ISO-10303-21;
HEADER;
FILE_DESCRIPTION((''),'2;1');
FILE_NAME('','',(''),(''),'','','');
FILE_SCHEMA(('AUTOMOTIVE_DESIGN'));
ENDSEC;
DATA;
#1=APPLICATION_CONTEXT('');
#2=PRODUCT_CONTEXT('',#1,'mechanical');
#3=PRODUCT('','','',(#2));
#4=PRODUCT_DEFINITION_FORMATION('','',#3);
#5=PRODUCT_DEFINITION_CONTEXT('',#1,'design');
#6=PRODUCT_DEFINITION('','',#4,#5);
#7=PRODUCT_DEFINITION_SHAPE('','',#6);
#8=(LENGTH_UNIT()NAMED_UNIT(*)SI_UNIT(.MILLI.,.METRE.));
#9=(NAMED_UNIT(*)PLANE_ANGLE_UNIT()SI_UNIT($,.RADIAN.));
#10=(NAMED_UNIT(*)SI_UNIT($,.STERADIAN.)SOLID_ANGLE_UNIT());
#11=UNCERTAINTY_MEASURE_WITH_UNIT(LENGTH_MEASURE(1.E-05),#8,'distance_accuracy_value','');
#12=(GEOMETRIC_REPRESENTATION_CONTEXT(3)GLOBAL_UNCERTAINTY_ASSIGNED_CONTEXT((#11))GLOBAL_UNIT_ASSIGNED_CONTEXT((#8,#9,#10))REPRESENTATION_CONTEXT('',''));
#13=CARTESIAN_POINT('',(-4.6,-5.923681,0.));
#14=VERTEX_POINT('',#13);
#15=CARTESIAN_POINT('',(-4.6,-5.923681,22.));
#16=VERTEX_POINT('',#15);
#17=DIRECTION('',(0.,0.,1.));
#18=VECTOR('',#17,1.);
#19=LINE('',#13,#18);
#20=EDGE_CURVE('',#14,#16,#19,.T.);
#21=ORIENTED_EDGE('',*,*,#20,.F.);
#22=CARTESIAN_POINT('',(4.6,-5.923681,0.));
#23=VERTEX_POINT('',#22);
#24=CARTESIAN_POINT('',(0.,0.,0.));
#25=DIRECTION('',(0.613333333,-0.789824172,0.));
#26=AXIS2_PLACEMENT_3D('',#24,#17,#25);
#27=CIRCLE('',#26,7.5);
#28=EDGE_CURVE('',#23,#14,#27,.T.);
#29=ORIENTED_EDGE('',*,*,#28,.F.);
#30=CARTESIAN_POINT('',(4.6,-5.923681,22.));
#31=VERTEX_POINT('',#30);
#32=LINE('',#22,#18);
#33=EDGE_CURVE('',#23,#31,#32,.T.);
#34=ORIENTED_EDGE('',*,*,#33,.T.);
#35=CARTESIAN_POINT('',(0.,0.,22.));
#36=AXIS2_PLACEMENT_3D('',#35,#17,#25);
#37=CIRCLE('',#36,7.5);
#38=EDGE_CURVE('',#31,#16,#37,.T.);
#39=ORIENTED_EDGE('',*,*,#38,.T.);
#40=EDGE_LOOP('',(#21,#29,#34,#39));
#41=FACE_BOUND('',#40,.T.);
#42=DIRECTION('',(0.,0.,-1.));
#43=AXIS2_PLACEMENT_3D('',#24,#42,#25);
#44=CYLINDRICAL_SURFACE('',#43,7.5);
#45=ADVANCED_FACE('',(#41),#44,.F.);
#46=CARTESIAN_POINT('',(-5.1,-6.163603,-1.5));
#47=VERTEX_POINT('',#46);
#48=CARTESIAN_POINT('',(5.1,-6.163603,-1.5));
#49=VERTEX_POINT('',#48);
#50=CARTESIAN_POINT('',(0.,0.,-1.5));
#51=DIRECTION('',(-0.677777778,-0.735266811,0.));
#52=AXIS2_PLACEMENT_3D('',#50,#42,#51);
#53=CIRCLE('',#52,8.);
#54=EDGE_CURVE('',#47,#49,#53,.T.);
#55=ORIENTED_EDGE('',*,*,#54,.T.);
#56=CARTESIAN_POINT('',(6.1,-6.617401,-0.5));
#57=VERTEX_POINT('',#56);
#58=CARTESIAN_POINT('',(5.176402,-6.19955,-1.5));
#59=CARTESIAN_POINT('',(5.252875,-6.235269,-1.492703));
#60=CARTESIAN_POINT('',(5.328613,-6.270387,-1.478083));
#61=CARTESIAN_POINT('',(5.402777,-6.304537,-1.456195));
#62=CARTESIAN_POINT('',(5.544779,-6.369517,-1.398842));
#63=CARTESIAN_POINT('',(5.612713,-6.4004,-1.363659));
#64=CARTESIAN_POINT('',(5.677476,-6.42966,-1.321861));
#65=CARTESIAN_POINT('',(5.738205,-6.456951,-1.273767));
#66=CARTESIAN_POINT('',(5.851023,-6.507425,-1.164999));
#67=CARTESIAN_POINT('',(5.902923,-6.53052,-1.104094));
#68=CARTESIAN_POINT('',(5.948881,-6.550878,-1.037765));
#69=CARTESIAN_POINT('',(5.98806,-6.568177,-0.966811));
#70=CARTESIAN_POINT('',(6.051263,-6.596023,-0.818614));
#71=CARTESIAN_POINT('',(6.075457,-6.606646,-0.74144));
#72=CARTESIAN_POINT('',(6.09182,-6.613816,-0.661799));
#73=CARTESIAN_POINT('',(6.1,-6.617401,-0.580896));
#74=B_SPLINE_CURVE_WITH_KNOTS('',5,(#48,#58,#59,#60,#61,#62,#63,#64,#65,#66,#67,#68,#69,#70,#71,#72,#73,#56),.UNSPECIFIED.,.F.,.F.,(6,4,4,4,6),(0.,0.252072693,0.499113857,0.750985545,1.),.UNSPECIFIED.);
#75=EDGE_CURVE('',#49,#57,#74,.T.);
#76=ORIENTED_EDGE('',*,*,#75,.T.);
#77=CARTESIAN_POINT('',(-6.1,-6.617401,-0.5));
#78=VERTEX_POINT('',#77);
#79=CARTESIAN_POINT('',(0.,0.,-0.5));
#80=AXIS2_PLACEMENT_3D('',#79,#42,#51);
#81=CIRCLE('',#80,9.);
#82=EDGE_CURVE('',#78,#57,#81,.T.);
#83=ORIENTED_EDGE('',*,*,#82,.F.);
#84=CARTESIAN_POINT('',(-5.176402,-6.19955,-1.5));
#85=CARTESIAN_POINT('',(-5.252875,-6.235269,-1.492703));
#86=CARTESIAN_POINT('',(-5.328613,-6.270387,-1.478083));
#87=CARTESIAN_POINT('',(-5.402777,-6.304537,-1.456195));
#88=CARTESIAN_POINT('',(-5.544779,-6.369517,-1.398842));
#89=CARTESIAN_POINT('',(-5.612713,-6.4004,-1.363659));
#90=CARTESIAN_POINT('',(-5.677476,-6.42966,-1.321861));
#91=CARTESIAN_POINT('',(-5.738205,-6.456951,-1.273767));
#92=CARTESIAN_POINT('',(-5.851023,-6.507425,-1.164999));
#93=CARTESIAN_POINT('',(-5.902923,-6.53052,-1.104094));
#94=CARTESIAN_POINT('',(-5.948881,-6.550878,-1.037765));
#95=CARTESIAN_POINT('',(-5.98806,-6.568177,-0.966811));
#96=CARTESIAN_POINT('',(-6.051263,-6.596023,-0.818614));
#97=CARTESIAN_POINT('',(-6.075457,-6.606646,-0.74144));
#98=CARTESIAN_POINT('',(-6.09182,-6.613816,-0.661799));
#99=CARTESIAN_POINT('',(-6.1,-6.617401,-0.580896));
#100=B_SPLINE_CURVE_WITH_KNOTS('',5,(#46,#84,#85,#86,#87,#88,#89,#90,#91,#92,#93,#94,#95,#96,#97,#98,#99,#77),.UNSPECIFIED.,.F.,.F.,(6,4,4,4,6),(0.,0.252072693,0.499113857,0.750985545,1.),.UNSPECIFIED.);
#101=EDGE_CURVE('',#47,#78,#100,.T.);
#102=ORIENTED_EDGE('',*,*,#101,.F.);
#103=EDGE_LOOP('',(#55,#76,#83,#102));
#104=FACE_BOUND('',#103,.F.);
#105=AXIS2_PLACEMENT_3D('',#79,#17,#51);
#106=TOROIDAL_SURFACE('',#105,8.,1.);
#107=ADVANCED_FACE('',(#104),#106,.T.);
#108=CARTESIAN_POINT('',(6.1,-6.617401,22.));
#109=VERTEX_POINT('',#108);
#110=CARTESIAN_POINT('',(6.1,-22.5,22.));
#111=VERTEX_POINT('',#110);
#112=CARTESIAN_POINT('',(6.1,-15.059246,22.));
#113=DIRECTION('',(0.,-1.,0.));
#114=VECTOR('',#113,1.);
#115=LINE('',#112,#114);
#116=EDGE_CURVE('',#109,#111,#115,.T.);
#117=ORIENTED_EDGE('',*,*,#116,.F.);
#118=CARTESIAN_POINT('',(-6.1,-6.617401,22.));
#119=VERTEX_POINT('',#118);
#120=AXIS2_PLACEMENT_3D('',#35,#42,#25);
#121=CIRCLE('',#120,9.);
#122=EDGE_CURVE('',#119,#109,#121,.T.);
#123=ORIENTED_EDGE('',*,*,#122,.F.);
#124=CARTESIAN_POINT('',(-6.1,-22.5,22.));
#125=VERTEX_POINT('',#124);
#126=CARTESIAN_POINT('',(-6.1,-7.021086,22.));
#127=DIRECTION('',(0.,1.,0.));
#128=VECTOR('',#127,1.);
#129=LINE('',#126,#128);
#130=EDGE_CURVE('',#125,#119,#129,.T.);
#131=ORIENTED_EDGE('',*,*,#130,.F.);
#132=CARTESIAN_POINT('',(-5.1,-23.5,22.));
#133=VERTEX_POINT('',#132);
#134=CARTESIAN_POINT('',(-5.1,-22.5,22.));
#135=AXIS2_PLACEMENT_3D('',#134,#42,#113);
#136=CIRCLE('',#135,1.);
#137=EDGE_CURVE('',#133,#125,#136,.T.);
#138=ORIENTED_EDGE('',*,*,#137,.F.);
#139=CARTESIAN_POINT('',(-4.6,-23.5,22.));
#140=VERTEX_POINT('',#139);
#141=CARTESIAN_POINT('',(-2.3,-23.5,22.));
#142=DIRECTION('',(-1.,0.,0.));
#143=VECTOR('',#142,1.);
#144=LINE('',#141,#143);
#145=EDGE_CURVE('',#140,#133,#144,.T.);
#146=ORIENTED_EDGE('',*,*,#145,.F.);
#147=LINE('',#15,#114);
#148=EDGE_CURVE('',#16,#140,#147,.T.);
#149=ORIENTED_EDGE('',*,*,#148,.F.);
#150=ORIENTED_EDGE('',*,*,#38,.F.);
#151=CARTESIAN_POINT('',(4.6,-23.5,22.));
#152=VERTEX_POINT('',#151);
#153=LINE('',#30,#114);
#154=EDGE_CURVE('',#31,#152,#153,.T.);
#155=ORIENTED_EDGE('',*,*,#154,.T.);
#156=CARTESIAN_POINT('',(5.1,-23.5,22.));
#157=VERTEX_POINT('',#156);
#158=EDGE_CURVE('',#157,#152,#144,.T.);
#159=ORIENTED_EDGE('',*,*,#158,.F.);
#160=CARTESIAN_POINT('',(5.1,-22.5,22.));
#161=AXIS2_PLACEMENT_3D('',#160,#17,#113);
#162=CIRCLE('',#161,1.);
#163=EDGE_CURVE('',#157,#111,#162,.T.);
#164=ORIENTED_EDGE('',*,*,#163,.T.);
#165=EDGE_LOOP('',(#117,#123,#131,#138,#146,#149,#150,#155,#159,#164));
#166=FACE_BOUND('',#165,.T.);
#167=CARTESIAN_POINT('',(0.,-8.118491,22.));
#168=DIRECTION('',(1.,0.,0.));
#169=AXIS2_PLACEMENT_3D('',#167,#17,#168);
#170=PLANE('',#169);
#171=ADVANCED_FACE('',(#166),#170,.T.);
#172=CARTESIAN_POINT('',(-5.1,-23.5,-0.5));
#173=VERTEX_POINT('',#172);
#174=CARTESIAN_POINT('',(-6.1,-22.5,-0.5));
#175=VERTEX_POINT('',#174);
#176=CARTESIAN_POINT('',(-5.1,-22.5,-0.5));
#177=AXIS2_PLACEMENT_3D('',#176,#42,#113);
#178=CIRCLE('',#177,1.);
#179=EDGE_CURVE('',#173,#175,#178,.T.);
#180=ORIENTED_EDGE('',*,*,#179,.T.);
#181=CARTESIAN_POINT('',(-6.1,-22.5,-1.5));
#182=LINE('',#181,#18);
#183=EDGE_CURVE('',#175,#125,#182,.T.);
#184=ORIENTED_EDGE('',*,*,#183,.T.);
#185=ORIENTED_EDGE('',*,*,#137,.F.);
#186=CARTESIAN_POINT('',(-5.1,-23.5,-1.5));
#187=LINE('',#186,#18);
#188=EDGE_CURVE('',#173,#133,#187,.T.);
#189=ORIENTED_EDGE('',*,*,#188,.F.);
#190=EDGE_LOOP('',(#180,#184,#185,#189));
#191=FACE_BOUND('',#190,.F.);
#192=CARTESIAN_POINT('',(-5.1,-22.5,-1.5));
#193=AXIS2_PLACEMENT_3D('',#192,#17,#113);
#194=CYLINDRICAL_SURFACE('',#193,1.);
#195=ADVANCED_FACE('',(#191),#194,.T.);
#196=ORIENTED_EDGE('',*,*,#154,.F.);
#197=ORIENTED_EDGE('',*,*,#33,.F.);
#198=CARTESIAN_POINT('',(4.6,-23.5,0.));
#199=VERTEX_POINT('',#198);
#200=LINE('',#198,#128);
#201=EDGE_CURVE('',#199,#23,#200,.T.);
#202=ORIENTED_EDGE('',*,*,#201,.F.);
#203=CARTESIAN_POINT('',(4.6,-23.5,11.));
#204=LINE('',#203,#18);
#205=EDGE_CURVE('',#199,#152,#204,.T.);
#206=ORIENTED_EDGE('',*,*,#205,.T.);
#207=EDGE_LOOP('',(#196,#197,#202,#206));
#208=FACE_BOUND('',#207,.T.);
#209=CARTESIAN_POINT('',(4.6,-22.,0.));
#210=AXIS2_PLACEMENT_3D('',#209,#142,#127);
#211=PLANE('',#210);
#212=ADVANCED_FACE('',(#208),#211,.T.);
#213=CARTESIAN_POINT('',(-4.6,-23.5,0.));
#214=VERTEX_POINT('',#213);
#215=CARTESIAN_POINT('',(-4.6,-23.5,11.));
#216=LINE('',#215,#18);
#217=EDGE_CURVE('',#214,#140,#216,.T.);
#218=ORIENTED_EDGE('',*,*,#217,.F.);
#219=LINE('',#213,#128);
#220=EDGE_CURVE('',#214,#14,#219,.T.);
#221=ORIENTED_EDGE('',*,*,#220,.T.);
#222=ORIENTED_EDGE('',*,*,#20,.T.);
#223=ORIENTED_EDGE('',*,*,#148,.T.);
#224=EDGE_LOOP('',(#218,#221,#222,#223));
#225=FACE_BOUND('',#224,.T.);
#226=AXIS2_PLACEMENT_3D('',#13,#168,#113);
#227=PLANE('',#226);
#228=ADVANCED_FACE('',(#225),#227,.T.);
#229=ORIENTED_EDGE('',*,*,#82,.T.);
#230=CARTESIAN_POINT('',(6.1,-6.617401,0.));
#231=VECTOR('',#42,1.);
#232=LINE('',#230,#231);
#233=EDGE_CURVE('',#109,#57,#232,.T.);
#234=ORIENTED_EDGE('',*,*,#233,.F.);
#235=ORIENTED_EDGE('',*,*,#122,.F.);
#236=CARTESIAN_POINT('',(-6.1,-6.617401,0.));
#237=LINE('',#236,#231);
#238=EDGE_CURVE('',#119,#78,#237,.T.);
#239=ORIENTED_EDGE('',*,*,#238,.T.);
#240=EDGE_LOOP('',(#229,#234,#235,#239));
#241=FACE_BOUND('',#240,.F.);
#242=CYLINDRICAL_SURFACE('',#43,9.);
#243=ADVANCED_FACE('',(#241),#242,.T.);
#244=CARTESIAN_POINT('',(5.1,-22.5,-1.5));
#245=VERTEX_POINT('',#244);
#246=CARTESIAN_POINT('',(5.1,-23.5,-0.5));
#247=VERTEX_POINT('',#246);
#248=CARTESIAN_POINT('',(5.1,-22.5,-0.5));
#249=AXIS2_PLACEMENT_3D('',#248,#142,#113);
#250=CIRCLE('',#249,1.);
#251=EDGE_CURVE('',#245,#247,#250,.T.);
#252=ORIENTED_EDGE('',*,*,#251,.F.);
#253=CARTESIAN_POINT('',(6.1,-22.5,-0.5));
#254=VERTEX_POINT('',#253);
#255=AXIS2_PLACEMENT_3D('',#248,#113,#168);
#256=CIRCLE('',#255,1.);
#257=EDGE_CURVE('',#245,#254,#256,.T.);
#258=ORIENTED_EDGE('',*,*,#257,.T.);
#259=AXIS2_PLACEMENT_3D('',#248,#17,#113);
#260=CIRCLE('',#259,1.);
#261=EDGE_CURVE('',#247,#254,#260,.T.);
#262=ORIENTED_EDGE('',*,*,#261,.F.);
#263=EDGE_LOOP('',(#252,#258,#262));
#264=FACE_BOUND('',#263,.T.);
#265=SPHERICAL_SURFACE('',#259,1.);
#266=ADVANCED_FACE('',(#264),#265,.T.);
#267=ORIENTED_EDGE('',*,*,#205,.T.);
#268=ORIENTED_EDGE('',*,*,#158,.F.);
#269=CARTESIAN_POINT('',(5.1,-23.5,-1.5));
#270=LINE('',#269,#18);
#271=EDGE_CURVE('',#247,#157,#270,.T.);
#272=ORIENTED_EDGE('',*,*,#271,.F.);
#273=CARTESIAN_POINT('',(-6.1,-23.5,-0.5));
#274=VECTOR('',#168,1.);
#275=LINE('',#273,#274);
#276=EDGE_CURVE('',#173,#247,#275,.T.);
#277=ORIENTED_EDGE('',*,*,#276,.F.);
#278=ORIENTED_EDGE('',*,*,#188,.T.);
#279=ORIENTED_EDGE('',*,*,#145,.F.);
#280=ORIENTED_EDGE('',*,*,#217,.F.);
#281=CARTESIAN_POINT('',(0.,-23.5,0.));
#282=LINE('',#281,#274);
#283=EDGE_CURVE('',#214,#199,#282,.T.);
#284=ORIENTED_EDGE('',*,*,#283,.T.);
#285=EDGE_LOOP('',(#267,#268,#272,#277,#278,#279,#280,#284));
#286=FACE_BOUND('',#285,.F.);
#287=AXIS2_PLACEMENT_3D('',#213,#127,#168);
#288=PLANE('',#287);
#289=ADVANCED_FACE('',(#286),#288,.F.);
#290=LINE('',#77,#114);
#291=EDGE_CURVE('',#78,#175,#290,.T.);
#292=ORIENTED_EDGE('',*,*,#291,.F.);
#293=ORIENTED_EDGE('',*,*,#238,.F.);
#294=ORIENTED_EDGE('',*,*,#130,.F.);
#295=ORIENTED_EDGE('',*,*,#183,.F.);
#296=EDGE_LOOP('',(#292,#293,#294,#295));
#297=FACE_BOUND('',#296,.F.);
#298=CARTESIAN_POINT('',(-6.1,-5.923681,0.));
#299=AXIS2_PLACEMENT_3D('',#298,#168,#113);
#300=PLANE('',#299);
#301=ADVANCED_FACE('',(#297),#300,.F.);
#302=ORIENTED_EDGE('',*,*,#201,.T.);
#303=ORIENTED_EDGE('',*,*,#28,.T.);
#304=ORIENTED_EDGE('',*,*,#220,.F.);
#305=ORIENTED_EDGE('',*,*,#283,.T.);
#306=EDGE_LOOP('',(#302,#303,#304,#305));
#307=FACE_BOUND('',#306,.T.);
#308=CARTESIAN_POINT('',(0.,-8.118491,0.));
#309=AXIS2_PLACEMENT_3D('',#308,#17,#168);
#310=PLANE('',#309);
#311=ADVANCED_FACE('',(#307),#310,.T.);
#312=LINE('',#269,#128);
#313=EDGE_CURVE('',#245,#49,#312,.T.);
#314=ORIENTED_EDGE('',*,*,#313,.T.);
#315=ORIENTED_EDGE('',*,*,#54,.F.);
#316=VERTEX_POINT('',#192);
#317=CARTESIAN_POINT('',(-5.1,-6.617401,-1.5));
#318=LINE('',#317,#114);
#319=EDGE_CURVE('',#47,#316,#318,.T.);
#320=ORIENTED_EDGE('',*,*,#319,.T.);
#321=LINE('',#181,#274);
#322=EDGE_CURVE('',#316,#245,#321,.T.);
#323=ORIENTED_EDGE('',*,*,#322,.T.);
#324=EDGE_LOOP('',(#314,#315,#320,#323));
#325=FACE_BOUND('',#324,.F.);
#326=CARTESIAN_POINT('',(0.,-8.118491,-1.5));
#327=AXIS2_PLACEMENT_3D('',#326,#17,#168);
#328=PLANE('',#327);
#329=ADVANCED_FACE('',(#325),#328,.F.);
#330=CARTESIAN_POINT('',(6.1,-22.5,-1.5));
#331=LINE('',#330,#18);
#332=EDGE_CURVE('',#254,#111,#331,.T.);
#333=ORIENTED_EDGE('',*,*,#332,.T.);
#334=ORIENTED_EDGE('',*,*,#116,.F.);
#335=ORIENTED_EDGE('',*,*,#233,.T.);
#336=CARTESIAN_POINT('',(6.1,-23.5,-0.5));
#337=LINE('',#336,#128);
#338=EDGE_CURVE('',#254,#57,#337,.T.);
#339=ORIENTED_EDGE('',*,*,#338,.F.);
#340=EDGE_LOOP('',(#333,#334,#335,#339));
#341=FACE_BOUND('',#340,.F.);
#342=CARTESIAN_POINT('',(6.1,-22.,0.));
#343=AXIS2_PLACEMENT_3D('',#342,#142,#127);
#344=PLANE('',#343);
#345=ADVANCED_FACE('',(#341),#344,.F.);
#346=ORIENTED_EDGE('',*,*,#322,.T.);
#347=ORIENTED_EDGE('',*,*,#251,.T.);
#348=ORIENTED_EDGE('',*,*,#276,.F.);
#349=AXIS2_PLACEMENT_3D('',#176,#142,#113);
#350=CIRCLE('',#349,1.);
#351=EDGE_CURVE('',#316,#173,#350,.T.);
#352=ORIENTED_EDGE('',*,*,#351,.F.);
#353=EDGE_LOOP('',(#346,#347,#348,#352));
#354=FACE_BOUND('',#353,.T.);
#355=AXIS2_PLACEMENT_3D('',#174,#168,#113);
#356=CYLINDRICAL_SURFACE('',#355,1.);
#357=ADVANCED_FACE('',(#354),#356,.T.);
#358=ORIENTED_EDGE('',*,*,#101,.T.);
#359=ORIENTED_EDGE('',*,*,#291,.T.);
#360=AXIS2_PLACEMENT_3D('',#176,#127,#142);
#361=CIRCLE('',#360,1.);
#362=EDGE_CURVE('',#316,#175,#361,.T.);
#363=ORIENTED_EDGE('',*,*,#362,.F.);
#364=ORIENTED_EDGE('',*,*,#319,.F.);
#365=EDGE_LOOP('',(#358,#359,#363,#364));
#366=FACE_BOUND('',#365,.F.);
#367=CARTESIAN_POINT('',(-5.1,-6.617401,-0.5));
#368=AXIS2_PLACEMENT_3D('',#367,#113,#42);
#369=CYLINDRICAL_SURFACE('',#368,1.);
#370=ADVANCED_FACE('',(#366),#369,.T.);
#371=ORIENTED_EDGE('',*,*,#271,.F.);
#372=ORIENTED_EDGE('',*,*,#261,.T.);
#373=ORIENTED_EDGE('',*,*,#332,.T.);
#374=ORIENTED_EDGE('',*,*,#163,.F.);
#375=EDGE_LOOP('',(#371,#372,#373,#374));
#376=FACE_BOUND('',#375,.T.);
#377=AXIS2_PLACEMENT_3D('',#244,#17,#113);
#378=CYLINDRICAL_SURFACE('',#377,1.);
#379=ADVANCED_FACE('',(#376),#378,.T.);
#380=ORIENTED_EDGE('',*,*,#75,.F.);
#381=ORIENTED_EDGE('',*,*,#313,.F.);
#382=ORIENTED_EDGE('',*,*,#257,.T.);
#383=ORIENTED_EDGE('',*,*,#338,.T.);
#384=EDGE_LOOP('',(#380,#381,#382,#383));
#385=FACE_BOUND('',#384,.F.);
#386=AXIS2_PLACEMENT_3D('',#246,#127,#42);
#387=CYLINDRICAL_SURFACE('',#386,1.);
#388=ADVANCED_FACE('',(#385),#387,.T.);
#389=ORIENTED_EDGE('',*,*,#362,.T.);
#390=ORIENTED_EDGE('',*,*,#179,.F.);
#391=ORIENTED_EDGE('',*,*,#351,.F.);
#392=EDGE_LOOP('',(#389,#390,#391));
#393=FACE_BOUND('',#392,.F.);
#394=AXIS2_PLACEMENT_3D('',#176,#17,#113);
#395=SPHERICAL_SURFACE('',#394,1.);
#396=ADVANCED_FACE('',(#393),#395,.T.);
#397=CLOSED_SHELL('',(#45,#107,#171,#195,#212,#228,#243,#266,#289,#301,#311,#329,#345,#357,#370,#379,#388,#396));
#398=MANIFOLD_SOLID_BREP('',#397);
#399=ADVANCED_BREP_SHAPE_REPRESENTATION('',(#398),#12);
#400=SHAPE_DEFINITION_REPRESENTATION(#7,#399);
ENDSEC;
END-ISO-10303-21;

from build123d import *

# Parameters (mm, degrees)
F1_DEPTH = 22
F2_T     = 1.5
F3_W     = 9.2
F3_H     = 22
F4_DEPTH = 1.5
F5_R     = 1


with BuildPart() as f1:
    # F0 (on Top) → F1 (new body)
    with BuildSketch(Plane.XY):
        with BuildLine():
            Line((-4.6, -5.9236812878), (-4.6, -22))
            Line((-4.6, -22), (4.6, -22))
            Line((4.6, -22), (4.6, -5.9236812878))
            ThreePointArc((4.6, -5.9236812878), (0, 7.5), (-4.6, -5.9236812878))
        make_face()
    extrude(amount=F1_DEPTH)

    # F2
    f2_openings = [f1.faces().sort_by_distance(p)[0] for p in [
        (0, -6.355052, 22),
    ]]
    offset(amount=F2_T, openings=f2_openings, kind=Kind.INTERSECTION)

    # F3 (on face) → F4 (cut, through all)
    with BuildSketch(Plane.XZ.offset(23.5)):
        with Locations((0, 11)):
            Rectangle(F3_W, F3_H)
    extrude(amount=-F4_DEPTH, mode=Mode.SUBTRACT)

    # F5
    f5_edges = [f1.edges().sort_by_distance(p)[0] for p in [
        (6.1, -23.5, 10.25),
        (-6.1, -23.5, 10.25),
        (0, -23.5, -1.5),
        (-6.1, -15.058701, -1.5),
        (6.1, -15.058701, -1.5),
        (0, 9, -1.5),
    ]]
    fillet(f5_edges, radius=F5_R)


solid = f1.part
